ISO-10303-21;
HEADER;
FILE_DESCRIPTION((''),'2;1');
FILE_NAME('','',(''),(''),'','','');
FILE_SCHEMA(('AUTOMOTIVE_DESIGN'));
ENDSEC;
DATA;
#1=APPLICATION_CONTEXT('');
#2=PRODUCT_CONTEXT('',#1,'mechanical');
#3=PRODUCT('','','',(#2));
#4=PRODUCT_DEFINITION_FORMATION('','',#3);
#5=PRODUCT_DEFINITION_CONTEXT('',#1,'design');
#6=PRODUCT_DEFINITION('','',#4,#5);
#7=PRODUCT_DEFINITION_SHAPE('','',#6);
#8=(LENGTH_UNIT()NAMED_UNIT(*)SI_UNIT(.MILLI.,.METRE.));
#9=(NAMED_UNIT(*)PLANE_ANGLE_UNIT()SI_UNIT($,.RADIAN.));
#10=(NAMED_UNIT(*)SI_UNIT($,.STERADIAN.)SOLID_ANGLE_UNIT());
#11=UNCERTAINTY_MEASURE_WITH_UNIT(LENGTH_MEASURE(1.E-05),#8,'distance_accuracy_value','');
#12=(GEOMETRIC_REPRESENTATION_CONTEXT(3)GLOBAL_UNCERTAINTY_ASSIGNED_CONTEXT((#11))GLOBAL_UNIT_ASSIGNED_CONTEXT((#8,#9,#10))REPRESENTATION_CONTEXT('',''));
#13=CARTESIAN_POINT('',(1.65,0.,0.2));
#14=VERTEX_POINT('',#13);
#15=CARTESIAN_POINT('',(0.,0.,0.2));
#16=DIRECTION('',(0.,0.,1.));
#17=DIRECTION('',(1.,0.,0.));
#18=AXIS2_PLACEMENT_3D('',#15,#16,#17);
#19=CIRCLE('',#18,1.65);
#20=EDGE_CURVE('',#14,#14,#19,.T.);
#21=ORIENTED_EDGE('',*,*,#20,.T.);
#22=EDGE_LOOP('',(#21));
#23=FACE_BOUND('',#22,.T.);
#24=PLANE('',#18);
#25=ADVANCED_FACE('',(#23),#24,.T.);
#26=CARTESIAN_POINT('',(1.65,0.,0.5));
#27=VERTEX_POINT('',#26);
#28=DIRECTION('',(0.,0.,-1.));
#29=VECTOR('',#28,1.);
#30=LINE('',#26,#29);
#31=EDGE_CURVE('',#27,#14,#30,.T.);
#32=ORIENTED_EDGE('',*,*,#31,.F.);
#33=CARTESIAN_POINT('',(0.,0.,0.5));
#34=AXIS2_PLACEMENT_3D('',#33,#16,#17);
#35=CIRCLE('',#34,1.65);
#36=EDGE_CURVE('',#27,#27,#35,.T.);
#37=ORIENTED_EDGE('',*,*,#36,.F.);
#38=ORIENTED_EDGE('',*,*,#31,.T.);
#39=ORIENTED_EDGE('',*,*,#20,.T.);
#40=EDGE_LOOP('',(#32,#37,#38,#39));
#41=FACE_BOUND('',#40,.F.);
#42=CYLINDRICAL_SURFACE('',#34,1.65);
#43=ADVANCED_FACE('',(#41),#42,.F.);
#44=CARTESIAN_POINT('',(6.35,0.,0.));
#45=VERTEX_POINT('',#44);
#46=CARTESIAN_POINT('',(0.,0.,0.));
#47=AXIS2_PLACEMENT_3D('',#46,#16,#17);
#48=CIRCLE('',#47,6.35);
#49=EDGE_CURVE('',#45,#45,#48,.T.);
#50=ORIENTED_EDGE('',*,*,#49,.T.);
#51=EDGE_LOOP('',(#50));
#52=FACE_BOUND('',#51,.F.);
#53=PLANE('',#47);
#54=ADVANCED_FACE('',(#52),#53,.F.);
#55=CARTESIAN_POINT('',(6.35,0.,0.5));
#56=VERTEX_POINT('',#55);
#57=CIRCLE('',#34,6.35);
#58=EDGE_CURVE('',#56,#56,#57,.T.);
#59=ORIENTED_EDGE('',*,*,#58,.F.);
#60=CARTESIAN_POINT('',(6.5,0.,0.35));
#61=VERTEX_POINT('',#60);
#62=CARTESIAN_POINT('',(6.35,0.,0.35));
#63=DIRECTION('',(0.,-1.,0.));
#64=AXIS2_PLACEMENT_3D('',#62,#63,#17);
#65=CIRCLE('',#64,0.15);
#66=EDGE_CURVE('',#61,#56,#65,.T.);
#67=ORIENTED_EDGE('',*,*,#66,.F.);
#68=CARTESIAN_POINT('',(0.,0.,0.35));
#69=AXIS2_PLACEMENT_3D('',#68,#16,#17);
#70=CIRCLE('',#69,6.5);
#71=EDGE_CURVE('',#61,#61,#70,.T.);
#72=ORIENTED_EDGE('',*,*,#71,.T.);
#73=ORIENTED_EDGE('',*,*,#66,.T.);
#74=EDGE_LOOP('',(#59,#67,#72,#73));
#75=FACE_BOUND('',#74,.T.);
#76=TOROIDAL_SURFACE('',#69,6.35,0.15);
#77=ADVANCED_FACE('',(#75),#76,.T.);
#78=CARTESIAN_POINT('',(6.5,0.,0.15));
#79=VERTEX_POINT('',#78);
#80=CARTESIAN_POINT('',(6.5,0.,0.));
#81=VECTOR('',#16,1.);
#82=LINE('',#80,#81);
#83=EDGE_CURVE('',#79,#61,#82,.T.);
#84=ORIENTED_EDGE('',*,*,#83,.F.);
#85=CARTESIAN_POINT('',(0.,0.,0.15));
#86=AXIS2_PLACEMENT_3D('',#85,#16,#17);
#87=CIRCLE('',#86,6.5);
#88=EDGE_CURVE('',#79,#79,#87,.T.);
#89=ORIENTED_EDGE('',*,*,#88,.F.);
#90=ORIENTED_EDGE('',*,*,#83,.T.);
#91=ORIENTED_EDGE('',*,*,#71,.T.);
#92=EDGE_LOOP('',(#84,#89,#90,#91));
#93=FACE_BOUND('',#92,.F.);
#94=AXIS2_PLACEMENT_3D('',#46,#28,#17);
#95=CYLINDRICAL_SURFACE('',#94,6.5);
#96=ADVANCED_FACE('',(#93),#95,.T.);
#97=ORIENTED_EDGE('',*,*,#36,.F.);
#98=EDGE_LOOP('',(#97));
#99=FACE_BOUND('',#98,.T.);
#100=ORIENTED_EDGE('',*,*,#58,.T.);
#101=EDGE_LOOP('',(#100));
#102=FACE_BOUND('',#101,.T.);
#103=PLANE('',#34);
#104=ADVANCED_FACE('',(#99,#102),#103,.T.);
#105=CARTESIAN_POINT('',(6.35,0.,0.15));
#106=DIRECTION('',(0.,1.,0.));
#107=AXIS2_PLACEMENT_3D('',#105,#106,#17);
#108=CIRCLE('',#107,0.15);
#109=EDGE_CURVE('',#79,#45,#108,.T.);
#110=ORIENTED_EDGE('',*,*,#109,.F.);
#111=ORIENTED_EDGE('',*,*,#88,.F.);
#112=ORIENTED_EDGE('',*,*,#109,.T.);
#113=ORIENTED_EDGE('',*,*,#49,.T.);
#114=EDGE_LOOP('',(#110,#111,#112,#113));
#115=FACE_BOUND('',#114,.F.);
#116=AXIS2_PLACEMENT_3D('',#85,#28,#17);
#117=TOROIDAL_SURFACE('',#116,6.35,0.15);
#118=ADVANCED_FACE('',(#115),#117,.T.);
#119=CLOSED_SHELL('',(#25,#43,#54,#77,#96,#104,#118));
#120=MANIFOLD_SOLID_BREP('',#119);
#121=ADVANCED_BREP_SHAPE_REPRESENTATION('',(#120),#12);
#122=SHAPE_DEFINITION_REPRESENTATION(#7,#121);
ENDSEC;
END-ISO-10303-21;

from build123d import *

# Parameters (mm, degrees)
F0_R     = 6.5
F1_DEPTH = 0.5
F2_R     = 0.15
F3_R     = 1.65
F4_DEPTH = 0.3


# Not quite as in the source:
# - a feature names something its author has since deleted; it is built from what else it names


with BuildPart() as f1:
    # F0 (on Top) → F1 (new body)
    with BuildSketch(Plane.XY):
        Circle(F0_R)
    extrude(amount=F1_DEPTH)

    # F2
    f2_edges = [f1.edges().sort_by_distance(p)[0] for p in [
        (-6.5, 0, 0.5),
        (-6.5, 0, 0),
    ]]
    fillet(f2_edges, radius=F2_R)

    # F3 (on face) → F4 (cut)
    with BuildSketch(Plane.XY.offset(0.5)):
        Circle(F3_R)
    extrude(amount=-F4_DEPTH, mode=Mode.SUBTRACT)


solid = f1.part
